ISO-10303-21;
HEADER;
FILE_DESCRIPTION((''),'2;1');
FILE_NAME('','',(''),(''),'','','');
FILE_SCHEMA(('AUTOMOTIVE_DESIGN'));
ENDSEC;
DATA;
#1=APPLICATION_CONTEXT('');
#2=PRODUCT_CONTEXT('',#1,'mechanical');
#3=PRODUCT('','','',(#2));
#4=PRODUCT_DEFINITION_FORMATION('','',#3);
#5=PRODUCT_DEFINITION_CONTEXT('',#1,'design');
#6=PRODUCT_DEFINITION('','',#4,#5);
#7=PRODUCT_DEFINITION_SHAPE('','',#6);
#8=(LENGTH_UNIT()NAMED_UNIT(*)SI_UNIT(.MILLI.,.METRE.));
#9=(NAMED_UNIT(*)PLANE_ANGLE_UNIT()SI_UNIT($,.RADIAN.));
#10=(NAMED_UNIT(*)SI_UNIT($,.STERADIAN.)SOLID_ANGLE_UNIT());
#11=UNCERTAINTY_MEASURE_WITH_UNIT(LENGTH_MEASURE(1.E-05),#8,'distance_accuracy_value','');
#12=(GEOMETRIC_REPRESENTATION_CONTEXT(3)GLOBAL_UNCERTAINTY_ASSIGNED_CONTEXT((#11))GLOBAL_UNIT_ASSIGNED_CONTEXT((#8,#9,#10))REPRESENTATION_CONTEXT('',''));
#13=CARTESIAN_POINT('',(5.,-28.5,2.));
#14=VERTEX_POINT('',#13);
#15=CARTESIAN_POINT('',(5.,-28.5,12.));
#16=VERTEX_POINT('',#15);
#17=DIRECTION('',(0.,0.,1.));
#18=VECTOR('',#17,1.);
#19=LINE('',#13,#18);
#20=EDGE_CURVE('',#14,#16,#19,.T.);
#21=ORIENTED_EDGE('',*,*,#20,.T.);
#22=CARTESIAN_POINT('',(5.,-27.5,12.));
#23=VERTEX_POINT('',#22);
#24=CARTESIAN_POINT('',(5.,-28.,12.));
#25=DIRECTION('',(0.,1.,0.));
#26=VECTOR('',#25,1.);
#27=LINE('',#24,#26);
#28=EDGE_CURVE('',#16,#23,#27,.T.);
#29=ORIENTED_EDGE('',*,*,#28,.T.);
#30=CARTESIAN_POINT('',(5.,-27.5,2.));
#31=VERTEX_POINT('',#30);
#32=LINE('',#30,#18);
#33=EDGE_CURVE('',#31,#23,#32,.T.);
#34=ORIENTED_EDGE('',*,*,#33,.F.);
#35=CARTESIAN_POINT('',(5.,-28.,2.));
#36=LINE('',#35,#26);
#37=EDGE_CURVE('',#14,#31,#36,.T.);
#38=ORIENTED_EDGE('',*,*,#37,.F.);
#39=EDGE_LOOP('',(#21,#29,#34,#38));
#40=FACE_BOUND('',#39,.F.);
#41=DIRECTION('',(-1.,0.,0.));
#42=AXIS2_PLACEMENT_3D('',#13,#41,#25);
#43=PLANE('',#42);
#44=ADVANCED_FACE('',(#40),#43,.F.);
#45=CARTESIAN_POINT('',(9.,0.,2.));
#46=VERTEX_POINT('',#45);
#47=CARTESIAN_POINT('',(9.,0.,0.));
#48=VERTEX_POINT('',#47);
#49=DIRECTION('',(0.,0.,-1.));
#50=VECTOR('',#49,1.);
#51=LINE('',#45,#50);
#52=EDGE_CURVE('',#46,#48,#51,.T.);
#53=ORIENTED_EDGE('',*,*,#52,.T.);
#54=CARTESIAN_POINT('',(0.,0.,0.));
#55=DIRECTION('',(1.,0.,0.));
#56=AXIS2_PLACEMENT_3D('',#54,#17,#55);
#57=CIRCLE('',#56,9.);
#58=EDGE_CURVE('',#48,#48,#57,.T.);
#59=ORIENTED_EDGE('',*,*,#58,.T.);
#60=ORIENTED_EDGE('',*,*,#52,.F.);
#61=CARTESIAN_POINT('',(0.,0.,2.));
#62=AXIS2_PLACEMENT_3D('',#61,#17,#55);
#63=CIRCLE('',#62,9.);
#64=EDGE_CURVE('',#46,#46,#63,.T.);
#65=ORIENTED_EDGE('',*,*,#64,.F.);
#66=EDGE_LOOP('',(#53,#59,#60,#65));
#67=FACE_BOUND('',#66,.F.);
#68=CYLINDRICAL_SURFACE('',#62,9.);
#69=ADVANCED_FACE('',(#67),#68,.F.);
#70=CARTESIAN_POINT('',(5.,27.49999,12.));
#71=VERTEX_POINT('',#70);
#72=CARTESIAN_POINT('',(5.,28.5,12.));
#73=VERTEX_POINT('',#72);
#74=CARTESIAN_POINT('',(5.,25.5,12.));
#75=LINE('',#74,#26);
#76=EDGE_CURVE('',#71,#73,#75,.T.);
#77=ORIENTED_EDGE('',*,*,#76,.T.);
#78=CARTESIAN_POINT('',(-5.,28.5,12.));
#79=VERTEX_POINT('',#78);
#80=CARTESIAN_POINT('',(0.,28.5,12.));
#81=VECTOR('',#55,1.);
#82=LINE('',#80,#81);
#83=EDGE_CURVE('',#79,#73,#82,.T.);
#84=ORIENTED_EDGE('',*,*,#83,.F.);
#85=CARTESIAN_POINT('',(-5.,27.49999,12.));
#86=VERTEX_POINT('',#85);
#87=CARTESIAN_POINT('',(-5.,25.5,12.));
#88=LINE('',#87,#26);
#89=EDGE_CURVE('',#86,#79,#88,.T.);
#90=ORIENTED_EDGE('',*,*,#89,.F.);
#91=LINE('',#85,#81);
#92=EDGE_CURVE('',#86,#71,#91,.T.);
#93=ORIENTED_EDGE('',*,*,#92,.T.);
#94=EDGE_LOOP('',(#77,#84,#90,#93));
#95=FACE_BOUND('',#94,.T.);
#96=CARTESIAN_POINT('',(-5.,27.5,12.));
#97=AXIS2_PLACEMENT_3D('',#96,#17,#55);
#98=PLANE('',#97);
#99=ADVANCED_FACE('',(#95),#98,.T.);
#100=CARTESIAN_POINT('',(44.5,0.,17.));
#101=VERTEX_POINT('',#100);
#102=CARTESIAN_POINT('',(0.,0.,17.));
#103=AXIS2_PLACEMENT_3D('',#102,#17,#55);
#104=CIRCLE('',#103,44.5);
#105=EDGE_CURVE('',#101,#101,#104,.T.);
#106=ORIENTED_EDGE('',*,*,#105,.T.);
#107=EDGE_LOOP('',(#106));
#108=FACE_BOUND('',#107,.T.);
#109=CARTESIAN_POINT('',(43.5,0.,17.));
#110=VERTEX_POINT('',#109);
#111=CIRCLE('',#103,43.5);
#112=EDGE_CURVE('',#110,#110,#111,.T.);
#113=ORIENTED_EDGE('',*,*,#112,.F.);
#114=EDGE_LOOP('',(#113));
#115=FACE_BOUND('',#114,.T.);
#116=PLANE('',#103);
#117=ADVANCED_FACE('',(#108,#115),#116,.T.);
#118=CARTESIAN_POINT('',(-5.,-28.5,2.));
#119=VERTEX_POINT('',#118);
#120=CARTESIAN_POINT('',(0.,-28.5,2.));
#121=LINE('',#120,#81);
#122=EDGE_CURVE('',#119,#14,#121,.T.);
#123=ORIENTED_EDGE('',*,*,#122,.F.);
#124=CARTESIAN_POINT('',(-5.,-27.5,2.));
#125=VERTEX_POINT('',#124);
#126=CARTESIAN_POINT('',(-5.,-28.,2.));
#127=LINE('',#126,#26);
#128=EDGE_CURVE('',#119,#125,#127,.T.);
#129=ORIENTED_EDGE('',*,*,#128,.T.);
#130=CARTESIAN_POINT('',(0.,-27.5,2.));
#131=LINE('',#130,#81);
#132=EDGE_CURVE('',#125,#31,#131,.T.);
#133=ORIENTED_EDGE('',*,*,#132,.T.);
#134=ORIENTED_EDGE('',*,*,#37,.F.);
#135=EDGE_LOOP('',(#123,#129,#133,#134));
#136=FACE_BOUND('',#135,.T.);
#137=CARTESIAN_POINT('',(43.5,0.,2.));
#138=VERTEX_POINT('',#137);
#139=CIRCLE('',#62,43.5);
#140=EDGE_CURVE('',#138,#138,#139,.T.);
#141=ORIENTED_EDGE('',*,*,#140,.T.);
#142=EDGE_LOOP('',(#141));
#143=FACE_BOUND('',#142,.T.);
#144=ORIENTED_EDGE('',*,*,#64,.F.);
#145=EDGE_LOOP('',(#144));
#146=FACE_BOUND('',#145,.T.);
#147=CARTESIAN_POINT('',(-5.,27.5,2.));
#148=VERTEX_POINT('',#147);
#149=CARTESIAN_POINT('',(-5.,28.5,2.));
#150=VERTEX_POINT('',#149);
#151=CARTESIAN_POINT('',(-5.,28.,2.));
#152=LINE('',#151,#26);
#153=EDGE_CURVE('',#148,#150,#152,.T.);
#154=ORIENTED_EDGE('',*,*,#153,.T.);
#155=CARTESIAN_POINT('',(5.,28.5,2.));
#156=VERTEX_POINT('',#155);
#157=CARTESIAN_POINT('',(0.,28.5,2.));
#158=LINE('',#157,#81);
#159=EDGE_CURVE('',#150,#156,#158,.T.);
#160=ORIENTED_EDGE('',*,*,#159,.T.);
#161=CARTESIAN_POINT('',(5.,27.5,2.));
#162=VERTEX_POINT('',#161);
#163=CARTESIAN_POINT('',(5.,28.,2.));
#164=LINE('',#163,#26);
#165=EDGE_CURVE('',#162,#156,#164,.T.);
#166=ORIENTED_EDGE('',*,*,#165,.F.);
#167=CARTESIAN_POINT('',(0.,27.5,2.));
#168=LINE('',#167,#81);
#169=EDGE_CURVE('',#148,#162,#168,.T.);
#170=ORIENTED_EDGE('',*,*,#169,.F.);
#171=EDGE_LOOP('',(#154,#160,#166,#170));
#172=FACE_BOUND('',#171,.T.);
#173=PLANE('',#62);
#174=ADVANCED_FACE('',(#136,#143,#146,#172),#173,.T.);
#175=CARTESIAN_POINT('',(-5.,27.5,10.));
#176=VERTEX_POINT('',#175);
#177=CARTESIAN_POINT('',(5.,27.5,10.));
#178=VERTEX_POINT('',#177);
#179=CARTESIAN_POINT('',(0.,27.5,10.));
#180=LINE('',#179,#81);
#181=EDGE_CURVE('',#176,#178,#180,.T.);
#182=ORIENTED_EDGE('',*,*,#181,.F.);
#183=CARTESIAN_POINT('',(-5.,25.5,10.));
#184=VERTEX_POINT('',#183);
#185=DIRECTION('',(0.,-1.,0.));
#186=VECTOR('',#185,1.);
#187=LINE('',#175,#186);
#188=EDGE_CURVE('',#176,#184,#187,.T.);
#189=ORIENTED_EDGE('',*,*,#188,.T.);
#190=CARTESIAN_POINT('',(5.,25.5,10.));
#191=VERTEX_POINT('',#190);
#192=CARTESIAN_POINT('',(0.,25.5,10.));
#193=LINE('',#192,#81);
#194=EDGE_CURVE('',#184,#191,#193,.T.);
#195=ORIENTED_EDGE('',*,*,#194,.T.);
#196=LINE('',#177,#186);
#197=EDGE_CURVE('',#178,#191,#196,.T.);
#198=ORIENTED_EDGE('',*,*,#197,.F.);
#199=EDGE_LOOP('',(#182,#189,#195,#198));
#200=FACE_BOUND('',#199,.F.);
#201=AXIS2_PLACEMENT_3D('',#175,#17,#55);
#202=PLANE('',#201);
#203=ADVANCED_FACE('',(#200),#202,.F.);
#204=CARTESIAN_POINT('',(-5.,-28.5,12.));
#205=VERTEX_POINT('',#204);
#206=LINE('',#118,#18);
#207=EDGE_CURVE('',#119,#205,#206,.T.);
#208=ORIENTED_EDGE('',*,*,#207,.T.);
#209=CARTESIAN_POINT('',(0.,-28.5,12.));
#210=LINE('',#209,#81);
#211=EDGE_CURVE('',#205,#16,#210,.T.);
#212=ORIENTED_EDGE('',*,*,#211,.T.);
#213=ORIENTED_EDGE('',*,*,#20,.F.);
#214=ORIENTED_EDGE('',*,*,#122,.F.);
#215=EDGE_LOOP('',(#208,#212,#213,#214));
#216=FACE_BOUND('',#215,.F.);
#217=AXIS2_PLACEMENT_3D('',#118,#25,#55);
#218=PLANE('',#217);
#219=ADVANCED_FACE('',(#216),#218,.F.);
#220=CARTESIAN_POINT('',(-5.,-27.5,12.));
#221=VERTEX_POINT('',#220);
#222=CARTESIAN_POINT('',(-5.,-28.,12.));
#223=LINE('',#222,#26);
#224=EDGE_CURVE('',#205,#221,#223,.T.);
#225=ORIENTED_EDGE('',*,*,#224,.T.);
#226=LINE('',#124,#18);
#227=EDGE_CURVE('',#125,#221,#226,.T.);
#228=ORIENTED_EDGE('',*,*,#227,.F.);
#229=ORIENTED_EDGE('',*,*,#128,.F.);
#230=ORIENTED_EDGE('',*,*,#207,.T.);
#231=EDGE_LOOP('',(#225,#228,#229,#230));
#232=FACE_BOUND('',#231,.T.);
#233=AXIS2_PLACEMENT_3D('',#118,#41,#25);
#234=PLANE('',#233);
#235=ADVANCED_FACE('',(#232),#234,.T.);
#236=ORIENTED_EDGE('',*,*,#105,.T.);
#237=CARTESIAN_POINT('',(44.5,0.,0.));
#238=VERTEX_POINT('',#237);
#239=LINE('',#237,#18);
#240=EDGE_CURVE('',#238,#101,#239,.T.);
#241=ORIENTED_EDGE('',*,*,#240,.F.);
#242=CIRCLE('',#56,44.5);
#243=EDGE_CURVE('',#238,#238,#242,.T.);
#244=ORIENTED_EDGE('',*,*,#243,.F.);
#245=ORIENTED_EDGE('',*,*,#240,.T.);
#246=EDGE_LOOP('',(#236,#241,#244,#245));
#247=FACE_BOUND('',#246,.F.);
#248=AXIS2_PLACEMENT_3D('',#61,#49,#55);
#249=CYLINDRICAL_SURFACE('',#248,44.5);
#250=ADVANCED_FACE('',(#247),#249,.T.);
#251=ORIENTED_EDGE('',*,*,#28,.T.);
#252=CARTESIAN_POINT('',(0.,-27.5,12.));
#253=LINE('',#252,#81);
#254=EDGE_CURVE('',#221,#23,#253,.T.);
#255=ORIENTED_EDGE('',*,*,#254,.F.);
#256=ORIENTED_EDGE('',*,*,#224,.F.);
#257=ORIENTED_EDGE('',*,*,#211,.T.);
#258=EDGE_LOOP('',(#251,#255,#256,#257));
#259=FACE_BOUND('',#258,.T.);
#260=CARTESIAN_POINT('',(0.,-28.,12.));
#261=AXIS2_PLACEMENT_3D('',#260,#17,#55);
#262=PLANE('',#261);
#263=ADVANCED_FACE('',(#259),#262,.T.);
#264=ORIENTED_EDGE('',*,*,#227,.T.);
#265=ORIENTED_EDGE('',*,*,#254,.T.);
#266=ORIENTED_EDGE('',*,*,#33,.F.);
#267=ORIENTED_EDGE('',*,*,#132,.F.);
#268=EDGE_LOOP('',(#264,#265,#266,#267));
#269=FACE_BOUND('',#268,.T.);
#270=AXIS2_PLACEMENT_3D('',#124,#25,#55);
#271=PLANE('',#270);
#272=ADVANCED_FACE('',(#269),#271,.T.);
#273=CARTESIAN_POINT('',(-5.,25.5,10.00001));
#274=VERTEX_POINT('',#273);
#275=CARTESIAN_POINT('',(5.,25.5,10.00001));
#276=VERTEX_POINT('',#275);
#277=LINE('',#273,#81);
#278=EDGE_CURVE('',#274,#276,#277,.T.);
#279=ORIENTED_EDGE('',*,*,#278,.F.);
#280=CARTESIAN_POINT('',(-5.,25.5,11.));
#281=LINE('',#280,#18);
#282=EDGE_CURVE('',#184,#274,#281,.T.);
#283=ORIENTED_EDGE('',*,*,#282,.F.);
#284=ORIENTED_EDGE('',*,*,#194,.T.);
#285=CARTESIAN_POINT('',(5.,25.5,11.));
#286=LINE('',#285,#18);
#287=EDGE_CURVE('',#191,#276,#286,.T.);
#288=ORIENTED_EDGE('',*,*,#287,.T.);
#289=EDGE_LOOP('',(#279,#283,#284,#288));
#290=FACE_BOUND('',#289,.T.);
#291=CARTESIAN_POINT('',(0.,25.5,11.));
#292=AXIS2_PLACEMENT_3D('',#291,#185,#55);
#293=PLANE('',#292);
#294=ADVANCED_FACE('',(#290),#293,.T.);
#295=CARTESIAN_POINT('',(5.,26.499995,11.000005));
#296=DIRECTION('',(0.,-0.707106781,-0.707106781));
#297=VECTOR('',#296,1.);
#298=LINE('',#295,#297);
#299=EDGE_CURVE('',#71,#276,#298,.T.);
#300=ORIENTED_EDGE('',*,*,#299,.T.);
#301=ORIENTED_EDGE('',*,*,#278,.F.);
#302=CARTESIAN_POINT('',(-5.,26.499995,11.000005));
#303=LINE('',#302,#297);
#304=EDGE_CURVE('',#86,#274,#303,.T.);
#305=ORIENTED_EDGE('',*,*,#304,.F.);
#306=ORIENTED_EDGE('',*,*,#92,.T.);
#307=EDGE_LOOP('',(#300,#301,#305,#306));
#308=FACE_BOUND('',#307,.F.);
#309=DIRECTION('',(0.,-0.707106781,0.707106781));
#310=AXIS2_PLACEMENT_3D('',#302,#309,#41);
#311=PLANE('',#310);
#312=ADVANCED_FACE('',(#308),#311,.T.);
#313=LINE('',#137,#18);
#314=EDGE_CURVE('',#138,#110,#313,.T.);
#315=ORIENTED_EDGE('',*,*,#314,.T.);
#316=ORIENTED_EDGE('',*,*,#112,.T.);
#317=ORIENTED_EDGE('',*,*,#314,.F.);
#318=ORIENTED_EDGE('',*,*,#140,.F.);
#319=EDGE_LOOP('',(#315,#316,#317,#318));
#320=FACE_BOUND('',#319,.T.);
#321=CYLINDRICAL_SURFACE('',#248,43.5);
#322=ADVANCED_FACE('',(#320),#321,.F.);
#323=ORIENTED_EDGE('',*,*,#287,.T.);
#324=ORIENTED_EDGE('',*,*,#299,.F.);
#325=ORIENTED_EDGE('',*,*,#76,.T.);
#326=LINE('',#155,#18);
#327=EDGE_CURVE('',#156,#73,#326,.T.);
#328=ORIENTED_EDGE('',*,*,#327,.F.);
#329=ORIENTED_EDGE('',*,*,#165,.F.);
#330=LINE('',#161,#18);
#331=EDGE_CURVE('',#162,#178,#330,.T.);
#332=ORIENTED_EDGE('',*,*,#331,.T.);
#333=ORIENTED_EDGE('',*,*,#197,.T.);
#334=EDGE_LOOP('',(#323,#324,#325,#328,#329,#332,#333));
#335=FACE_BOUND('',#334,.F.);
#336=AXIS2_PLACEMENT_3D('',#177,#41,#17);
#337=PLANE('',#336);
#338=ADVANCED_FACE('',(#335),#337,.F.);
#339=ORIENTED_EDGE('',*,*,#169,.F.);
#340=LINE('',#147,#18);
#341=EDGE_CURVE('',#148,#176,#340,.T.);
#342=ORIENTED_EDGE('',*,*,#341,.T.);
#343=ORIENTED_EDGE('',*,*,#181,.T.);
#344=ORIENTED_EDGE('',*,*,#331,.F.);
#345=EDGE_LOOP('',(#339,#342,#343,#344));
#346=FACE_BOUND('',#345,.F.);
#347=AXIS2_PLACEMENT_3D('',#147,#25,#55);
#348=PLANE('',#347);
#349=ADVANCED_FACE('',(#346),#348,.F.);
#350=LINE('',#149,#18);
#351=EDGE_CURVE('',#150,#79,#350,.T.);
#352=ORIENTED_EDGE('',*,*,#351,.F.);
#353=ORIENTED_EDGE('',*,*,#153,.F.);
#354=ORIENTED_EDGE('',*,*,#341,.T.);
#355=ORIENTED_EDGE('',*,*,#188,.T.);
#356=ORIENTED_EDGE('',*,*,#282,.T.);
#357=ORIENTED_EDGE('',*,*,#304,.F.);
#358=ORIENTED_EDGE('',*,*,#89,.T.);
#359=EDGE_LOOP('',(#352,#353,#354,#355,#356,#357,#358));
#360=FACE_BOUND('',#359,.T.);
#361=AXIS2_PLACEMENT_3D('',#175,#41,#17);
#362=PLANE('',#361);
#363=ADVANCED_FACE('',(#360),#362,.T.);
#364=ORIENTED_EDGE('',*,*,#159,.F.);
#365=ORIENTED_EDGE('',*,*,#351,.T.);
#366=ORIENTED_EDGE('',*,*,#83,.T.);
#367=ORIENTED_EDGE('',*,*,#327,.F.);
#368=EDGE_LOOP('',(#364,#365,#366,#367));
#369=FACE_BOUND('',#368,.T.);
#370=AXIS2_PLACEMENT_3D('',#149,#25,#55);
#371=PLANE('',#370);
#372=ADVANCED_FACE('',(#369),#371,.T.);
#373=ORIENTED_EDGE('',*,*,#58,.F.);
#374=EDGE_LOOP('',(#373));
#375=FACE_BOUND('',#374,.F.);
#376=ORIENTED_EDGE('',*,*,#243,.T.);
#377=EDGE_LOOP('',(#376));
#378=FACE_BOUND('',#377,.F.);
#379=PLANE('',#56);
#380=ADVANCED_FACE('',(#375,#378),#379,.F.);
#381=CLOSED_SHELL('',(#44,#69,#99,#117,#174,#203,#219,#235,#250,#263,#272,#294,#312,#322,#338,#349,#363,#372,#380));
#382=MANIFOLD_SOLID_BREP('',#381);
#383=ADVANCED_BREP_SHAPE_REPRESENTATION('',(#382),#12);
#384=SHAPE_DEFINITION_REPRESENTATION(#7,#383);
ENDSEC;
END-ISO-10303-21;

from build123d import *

# Parameters (mm, degrees)
F0_R      = 44.5
F1_DEPTH  = 2
F2_R      = 44.5
F2_R_2    = 43.5
F3_DEPTH  = 15
F4_R      = 9
F5_DEPTH  = 25
F7_W      = 10
F7_H      = 1
F8_DEPTH  = 10
F10_W     = 10
F10_H     = 2
F11_DEPTH = 2
F12_SIZE  = 1.99999


# Not quite as in the source:
# - a fillet or chamfer is up to 0.001 mm smaller than in the source, because OpenCascade refuses the exact size


with BuildPart() as f1:
    # F0 (on Top) → F1 (new body)
    with BuildSketch(Plane.XY):
        Circle(F0_R)
    extrude(amount=F1_DEPTH)

    # F2 (on face) → F3 (join)
    with BuildSketch(Plane.XY.offset(2)):
        Circle(F2_R)
        Circle(F2_R_2, mode=Mode.SUBTRACT)
    extrude(amount=F3_DEPTH)

    # F4 (on face) → F5 (cut)
    with BuildSketch(Plane.XY.offset(2)):
        Circle(F4_R)
    extrude(amount=-F5_DEPTH, mode=Mode.SUBTRACT)

    # F7 (on face) → F8 (join)
    with BuildSketch(Plane.XY.offset(2)):
        with Locations((0, 28)):
            Rectangle(F7_W, F7_H)
        with Locations((0, -28)):
            Rectangle(F7_W, F7_H)
    extrude(amount=F8_DEPTH)

    # F10 (on face) → F11 (join)
    with BuildSketch(Plane.XZ.offset(-27.5)):
        with Locations((0, 11)):
            Rectangle(F10_W, F10_H)
    extrude(amount=F11_DEPTH)

    # F12 (size 2 in the source; OpenCascade refuses exactly that, so slightly less here)
    f12_edges = [f1.edges().sort_by_distance(p)[0] for p in [
        (0, 25.5, 12),
    ]]
    chamfer(f12_edges, length=F12_SIZE)


solid = f1.part
